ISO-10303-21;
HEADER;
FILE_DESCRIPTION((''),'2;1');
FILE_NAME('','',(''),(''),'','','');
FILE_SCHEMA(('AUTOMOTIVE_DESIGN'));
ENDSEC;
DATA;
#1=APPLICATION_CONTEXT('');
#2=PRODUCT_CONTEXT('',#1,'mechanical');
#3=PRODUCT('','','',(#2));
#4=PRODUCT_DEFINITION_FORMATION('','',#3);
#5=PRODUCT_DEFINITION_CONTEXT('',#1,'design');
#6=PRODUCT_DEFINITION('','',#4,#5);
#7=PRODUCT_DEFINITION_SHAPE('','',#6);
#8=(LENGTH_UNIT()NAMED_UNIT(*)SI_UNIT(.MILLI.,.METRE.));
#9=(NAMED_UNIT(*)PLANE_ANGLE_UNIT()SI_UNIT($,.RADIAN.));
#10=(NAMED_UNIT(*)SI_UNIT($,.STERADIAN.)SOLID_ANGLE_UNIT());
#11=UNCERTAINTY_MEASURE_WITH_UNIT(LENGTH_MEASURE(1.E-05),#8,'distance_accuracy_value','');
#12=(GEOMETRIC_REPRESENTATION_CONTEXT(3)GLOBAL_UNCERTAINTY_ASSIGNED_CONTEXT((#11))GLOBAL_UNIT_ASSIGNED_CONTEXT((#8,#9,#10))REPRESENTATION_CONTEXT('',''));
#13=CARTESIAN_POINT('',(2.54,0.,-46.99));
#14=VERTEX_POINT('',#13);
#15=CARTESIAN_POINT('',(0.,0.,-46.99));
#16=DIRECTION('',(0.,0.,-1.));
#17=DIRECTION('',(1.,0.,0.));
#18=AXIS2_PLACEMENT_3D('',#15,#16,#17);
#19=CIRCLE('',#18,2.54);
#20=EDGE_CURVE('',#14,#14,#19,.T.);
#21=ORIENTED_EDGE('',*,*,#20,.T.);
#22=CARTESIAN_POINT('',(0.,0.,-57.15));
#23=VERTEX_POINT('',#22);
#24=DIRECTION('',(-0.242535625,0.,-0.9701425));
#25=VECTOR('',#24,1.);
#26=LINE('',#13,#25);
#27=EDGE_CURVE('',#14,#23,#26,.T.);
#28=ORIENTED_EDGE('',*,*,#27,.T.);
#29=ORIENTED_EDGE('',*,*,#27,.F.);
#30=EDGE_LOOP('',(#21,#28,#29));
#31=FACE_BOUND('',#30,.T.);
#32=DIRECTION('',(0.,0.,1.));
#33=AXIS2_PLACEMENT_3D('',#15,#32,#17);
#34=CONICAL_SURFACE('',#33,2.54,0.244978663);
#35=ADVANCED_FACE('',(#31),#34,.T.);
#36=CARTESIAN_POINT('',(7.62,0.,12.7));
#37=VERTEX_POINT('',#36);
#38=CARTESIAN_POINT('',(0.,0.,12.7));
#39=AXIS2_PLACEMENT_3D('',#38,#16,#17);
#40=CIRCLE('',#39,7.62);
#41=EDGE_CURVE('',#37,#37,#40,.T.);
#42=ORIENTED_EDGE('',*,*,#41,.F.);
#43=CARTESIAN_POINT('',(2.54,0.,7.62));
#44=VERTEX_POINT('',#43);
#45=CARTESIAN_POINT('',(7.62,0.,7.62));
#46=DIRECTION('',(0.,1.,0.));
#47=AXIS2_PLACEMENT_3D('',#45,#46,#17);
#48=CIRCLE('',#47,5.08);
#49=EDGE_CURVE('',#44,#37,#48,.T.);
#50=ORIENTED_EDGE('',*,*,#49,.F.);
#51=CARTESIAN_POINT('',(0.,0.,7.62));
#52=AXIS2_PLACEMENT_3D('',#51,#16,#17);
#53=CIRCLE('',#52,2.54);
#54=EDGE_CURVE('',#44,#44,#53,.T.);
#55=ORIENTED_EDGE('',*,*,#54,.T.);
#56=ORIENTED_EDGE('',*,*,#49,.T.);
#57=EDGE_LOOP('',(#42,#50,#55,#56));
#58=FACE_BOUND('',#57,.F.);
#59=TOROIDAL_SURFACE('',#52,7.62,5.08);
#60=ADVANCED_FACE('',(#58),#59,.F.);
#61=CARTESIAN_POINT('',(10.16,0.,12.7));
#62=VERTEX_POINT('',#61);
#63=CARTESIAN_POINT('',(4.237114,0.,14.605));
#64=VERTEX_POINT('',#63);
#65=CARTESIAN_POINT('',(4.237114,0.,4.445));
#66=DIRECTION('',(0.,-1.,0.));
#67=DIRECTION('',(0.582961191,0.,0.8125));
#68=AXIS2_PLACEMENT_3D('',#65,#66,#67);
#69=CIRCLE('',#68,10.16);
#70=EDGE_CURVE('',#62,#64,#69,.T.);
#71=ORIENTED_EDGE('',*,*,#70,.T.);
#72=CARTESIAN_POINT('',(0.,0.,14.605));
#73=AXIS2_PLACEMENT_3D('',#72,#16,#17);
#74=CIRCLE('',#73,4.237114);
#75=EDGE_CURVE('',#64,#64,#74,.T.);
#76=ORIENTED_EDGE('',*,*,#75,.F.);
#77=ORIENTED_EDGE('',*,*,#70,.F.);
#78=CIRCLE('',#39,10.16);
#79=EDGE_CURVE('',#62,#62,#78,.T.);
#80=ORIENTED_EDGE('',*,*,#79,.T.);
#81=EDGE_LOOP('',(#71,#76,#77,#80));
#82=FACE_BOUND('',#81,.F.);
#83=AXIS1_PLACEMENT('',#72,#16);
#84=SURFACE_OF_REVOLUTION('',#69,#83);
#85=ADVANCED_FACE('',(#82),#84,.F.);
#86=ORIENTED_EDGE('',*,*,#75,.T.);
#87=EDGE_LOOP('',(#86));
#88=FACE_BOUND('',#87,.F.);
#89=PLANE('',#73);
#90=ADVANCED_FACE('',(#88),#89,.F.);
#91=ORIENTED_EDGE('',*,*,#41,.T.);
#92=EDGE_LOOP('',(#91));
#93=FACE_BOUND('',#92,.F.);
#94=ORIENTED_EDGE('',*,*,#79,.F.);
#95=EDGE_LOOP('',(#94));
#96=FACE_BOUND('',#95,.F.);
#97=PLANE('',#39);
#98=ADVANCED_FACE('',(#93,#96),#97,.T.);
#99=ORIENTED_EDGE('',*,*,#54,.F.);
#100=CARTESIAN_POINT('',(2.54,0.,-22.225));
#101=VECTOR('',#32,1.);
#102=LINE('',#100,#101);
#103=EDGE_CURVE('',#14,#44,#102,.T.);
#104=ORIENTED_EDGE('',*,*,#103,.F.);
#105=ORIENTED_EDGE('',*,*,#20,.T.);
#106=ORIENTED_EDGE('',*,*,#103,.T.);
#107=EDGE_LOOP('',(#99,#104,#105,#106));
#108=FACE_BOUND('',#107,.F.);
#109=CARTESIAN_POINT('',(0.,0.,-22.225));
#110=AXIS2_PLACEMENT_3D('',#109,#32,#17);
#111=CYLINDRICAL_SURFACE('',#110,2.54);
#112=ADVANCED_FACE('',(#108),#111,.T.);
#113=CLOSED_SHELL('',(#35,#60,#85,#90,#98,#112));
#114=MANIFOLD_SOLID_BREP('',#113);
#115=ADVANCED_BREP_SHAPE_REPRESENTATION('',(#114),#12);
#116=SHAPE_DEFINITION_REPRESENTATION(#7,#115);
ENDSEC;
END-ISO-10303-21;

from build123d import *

# Parameters (mm, degrees)
F0_W     = 2.54
F0_H     = 69.85
F2_SIZE2 = 2.54
F2_SIZE  = 10.16
F3_R     = 5.08


# Not quite as in the source:
# - a fillet or chamfer that OpenCascade refuses, or shapes differently, is made with other operations: its cross-section is extruded or revolved along the edge and cut away or added


with BuildPart() as f1:
    # F0 (on Front) → F1 (revolve)
    with BuildSketch(Plane.XZ):
        Polygon((0, 14.605), (0, 12.7), (2.54, 12.7), (10.16, 12.7), (10.16, 14.605), align=None)
        with Locations((1.27, -22.225)):
            Rectangle(F0_W, F0_H)
    revolve(axis=Axis((0, 0, -22.225), (0, 0, -1)))

    # F2
    f2_edges = [f1.edges().sort_by_distance(p)[0] for p in [
        (-2.54, 0, -57.15),
    ]]
    f2_side = f1.faces().sort_by_distance((-2.54, 0, -22.225))[0]
    chamfer(f2_edges, length=F2_SIZE, length2=F2_SIZE2, reference=f2_side)

    # F3
    f3_edges = [f1.edges().sort_by_distance(p)[0] for p in [
        (-2.54, 0, 12.7),
    ]]
    fillet(f3_edges, radius=F3_R)

    # F4: fillet of radius 10.16 on 1 edges, made by hand

    # F4_s1 → F4_t2 (revolve, cut)
    with BuildSketch(Plane.XZ):
        with BuildLine():
            ThreePointArc((10.16, 12.7), (7.3479662746, 14.1170318444), (4.2371143013, 14.605))
            Line((4.2371143013, 14.605), (10.16, 14.605))
            Line((10.16, 14.605), (10.16, 12.7))
        make_face()
    revolve(axis=Axis((0, 0, 14.605), (0, 0, -1)), mode=Mode.SUBTRACT)


solid = f1.part
